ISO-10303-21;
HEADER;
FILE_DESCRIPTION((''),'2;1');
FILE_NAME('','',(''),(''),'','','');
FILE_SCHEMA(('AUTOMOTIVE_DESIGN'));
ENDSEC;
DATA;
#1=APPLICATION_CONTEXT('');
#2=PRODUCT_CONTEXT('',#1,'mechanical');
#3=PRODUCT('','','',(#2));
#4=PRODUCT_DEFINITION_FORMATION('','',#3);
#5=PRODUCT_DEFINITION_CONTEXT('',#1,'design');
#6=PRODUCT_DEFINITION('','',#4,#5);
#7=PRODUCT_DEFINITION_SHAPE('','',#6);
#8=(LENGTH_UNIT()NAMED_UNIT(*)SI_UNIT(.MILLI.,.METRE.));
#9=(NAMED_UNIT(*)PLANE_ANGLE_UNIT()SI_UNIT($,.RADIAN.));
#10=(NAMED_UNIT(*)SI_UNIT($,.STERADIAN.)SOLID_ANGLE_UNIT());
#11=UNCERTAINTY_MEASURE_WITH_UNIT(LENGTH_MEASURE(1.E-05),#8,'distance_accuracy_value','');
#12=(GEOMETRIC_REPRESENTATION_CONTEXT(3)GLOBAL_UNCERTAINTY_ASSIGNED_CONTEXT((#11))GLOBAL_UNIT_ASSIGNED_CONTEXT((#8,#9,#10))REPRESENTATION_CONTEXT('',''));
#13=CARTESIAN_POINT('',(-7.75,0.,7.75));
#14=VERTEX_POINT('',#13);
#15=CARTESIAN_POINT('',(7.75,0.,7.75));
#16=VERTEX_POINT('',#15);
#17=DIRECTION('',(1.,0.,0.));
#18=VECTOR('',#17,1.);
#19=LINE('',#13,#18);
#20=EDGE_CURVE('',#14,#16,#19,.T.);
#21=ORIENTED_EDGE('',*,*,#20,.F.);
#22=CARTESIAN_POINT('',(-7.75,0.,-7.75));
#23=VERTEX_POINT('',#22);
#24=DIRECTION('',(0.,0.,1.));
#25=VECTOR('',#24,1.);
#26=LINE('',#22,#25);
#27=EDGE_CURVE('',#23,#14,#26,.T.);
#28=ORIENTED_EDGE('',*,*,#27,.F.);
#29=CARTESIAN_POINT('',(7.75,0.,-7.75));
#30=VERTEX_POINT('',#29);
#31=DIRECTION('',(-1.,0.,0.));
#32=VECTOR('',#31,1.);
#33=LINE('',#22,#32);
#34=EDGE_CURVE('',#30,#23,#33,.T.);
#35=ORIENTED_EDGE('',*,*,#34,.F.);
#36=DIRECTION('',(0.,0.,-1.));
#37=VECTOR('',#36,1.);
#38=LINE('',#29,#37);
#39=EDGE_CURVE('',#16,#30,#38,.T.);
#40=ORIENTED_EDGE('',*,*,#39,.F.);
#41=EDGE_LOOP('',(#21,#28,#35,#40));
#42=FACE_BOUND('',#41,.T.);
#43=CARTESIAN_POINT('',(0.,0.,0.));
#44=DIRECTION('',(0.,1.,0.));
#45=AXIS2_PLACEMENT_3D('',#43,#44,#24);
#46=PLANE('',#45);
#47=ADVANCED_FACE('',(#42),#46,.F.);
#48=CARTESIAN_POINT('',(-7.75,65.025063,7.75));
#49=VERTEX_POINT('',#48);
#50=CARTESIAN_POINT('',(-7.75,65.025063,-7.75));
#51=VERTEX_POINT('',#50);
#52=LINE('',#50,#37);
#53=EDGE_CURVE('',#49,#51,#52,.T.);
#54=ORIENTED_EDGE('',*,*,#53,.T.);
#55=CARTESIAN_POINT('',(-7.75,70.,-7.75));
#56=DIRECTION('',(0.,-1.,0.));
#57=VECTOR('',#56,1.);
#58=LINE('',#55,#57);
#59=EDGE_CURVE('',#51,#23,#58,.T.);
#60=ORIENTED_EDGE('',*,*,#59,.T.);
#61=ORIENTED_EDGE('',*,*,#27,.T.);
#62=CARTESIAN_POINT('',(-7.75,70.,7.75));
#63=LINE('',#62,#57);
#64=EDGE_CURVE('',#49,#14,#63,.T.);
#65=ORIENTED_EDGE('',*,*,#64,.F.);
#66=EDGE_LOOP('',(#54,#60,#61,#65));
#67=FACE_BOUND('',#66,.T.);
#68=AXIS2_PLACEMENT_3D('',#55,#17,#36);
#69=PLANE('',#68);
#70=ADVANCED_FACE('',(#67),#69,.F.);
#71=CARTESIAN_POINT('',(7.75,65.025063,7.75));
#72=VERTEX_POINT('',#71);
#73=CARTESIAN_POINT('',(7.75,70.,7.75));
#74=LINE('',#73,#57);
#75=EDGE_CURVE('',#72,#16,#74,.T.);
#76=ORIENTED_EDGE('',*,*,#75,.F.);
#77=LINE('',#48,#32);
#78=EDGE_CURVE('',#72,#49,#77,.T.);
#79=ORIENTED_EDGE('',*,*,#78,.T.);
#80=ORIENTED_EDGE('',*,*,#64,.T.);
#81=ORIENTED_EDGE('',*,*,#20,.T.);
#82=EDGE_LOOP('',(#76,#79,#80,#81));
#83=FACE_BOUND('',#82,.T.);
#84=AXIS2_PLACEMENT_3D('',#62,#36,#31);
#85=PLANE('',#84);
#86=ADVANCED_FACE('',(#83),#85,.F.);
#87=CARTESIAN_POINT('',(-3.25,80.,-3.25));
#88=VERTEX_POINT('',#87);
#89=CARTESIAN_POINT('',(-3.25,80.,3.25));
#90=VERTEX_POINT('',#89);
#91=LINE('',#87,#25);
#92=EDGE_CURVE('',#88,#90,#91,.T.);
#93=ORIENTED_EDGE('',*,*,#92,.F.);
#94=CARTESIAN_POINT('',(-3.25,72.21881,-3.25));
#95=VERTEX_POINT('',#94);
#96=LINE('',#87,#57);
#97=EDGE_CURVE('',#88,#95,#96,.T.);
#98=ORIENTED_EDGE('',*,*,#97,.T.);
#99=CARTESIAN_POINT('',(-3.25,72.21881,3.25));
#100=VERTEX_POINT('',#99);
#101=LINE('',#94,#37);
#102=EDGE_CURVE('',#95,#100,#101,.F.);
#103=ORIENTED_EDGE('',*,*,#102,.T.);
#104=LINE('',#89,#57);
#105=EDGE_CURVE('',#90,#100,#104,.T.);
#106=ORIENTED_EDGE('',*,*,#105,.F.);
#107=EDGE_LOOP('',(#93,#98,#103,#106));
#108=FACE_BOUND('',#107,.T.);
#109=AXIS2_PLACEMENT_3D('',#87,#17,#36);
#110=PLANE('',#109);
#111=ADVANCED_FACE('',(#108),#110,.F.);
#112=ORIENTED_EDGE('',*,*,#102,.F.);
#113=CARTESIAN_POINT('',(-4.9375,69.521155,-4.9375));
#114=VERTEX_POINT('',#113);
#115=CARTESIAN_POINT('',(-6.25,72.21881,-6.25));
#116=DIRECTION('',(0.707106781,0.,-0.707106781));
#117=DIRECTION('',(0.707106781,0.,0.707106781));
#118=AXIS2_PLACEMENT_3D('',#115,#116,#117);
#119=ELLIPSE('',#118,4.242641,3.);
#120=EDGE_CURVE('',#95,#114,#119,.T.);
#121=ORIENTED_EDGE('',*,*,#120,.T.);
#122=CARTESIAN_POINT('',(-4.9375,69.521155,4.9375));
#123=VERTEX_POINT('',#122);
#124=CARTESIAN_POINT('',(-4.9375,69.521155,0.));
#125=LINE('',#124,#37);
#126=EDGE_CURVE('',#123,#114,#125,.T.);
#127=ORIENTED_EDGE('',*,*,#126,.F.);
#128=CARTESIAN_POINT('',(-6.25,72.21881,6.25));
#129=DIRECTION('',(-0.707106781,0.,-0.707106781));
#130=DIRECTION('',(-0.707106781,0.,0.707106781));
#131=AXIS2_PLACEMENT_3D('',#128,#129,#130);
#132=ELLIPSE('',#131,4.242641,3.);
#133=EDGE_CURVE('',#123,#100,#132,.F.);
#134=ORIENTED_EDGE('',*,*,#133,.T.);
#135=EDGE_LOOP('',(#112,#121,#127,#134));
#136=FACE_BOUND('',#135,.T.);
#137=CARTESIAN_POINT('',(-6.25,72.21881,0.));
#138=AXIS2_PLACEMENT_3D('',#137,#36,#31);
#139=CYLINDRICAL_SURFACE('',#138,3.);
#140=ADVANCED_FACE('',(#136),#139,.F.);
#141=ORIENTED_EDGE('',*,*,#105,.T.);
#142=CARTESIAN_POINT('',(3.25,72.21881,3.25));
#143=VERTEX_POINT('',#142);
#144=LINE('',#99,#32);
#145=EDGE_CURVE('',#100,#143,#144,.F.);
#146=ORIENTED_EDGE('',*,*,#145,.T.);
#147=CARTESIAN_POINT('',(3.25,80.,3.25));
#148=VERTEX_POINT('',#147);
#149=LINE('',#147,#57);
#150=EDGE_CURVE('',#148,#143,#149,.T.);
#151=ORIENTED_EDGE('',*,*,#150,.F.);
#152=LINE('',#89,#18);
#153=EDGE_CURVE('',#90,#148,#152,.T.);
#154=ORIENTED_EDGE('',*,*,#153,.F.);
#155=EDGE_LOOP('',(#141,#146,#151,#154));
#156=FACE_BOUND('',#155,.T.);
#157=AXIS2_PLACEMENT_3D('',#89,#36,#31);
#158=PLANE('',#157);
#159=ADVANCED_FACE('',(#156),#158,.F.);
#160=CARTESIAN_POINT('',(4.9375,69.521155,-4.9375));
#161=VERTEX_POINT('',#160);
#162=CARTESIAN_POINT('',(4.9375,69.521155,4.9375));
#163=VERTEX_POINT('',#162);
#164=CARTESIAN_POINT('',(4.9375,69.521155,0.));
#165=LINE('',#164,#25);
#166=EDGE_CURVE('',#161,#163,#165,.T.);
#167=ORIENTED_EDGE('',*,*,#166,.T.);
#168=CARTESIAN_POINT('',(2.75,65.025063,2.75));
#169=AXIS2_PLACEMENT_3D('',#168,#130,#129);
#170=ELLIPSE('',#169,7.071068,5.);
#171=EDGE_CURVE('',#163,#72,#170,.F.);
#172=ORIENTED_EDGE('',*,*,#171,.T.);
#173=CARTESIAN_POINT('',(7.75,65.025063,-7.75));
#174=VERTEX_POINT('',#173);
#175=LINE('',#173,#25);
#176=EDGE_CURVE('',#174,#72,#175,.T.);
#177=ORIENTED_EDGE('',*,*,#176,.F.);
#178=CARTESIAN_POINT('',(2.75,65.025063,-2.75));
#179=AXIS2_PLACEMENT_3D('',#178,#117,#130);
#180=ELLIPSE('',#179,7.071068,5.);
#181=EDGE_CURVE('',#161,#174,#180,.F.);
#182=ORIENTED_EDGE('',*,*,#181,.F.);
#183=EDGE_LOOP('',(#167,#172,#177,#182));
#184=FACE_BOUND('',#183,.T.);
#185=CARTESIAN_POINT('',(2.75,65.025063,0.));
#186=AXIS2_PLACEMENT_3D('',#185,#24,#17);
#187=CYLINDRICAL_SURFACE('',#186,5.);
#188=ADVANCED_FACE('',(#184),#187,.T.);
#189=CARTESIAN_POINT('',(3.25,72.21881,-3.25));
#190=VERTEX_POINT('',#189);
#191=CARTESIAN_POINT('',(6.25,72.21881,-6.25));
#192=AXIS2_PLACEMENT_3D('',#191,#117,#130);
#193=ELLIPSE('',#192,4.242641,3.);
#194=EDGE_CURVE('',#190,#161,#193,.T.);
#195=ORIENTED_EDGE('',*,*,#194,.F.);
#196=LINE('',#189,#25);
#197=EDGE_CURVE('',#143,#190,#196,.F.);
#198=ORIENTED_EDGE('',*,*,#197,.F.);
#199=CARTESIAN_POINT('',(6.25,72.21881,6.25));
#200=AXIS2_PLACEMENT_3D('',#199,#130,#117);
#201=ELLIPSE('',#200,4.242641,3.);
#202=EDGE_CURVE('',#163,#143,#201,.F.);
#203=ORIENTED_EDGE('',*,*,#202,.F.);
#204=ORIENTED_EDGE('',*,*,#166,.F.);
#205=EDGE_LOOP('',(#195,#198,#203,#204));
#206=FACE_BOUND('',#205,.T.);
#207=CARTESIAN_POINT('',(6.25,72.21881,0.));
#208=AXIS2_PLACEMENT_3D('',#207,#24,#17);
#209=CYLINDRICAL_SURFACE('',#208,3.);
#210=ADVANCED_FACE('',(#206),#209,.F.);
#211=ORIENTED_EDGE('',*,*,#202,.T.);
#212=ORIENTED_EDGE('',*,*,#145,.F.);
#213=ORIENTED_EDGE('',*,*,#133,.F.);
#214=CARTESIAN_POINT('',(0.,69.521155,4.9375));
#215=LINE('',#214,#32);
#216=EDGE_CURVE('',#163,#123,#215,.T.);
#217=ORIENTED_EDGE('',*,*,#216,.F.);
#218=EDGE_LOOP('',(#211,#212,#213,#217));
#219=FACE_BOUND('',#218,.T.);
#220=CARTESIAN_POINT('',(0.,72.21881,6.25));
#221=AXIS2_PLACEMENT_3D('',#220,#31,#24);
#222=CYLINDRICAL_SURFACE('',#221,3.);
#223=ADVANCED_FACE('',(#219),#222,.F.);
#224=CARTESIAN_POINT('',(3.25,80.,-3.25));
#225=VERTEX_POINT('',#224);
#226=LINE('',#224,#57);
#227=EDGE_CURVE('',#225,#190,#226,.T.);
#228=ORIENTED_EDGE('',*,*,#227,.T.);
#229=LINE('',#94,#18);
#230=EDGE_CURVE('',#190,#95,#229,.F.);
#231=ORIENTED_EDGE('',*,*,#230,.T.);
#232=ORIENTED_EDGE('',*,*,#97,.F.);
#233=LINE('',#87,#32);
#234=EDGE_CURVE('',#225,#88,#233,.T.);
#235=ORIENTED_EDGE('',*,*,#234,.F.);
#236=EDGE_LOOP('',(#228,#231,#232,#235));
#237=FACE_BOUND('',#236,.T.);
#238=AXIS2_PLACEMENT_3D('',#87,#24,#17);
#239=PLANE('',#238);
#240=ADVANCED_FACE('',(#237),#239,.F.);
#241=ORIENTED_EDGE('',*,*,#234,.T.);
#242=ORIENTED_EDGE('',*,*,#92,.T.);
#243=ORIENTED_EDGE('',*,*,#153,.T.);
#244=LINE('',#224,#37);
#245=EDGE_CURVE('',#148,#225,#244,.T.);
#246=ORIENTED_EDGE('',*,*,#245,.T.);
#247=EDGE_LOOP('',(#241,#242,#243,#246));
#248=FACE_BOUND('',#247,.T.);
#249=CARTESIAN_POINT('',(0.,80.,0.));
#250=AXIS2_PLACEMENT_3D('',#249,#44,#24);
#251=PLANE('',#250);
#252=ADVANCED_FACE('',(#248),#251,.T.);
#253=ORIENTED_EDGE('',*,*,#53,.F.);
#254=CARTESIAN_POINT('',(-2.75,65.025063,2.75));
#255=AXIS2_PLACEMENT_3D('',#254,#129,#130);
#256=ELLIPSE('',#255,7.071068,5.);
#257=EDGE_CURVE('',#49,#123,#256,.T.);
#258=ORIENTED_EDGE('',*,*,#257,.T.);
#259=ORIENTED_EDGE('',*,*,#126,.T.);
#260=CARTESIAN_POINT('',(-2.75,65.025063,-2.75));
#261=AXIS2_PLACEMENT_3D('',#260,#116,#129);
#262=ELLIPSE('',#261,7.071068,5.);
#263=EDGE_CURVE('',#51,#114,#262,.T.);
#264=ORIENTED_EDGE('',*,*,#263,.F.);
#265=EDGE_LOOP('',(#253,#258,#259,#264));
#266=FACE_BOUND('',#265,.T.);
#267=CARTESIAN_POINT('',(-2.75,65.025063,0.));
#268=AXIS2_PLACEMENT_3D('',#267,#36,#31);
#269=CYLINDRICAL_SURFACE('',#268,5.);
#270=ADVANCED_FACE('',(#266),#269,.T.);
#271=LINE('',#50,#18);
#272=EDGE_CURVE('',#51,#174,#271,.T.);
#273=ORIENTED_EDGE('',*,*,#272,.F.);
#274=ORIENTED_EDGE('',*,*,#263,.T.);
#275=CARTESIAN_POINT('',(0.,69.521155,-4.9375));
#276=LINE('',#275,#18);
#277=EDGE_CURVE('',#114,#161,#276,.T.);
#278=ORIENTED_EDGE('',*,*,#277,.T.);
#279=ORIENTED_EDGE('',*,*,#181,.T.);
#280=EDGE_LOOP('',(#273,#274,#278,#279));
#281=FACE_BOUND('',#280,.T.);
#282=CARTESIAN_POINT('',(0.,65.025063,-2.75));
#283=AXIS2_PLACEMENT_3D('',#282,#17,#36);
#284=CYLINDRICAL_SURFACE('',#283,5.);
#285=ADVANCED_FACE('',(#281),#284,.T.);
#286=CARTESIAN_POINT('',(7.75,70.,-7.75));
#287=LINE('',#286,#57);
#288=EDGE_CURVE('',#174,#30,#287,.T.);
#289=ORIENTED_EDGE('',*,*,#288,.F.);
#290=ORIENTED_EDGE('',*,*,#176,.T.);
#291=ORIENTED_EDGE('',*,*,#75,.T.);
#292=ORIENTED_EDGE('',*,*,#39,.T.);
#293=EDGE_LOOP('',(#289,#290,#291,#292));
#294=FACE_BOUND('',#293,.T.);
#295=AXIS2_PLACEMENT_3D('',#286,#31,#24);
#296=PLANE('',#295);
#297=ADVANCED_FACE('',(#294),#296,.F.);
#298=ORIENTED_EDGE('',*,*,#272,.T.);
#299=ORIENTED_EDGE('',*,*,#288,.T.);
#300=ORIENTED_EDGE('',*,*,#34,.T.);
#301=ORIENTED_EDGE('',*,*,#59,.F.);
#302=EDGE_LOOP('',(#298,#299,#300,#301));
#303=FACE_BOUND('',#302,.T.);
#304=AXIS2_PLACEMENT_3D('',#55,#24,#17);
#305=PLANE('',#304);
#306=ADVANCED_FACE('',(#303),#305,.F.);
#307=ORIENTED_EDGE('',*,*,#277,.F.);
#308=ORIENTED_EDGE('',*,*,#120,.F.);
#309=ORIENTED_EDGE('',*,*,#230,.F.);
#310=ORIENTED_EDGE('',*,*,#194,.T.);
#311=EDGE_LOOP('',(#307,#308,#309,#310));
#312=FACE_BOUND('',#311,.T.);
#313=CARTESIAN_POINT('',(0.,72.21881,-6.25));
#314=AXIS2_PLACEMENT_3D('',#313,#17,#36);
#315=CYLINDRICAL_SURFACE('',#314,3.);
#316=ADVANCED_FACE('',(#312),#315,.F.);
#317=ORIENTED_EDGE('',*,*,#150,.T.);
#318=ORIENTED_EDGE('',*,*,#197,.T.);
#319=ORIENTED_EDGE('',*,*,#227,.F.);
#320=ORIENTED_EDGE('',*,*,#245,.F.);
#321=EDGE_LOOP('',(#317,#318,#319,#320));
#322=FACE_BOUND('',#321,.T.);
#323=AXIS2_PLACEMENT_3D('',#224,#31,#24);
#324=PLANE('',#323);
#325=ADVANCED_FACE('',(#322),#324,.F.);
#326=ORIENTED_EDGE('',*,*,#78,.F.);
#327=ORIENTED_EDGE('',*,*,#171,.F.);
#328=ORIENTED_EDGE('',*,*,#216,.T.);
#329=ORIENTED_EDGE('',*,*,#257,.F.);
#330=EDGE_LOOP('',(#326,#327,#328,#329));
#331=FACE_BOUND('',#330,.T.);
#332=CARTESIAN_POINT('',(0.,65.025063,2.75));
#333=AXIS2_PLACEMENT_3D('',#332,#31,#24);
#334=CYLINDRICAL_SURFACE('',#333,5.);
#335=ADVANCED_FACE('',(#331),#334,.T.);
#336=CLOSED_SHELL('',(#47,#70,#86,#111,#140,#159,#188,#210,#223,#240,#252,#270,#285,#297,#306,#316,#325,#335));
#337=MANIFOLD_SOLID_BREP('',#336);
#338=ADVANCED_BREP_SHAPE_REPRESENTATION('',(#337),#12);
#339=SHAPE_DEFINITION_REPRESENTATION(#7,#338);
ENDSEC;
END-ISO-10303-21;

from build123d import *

# Parameters (mm, degrees)
SKETCH1_W           = 15.5
SKETCH1_H           = 15.5
BOSS_EXTRUDE1_DEPTH = 70
SKETCH2_W           = 6.5
SKETCH2_H           = 6.5
BOSS_EXTRUDE2_DEPTH = 10
FILLET1_R           = 5
FILLET2_R           = 3


with BuildPart() as part:
    # Sketch1 → Boss-Extrude1 (new body)
    with BuildSketch(Plane(origin=(0, 0, 0), x_dir=(1, 0, 0), z_dir=(0, 1, 0))):
        Rectangle(SKETCH1_W, SKETCH1_H)
    extrude(amount=BOSS_EXTRUDE1_DEPTH)

    # Sketch2 → Boss-Extrude2 (add)
    with BuildSketch(Plane(origin=(0, 70, 0), x_dir=(1, 0, 0), z_dir=(0, 1, 0))):
        Rectangle(SKETCH2_W, SKETCH2_H)
    extrude(amount=BOSS_EXTRUDE2_DEPTH)

    # Fillet1
    # the kernel refuses this fillet: 5 mm, written as the material it takes off along each edge
    with BuildSketch(Plane(origin=(-7.75, 70, 20.187342964), x_dir=(0, -1, 0), z_dir=(0, 0, -1)), Plane(origin=(7.75, 70, -20.187342964), x_dir=(0, -1, 0), z_dir=(0, 0, 1)), Plane(origin=(-20.187342964, 70, -7.75), x_dir=(0, -1, 0), z_dir=(1, 0, 0))) as fillet1_piece_1:
        with BuildLine():
            CenterArc((4.974937186, -5), FILLET1_R, 90, 84.260829523)
            Line((0, -4.5), (-0.099498744, -4.49))
            ThreePointArc((-0.099498744, -4.49), (-0.1, -2.25), (-0.1, 0))
            Line((-0.1, 0), (0, 0.1))
            Line((0, 0.1), (4.974937186, 0.1))
            Line((4.974937186, 0.1), (4.974937186, 0))
        make_face()
    extrude(amount=40.374685928, mode=Mode.SUBTRACT)
    with BuildSketch(Plane(origin=(20.187342964, 70, 7.75), x_dir=(0, 0, -1), z_dir=(-1, 0, 0))) as fillet1_piece_2:
        with BuildLine():
            CenterArc((5, 4.974937186), FILLET1_R, 180, 84.260829523)
            Line((0, 4.974937186), (-0.1, 4.974937186))
            Line((-0.1, 4.974937186), (-0.1, 0))
            Line((-0.1, 0), (0, -0.1))
            ThreePointArc((0, -0.1), (2.25, -0.1), (4.49, -0.099498744))
            Line((4.49, -0.099498744), (4.5, 0))
        make_face()
    extrude(amount=40.374685928, mode=Mode.SUBTRACT)

    # Fillet2
    fillet2_edges = [part.edges().sort_by_distance(p)[0] for p in [
        (-3.25, 70, 0),
        (0, 70, -3.25),
        (0, 70, 3.25),
        (3.25, 70, 0),
    ]]
    fillet(fillet2_edges, radius=FILLET2_R)


solid = part.part
